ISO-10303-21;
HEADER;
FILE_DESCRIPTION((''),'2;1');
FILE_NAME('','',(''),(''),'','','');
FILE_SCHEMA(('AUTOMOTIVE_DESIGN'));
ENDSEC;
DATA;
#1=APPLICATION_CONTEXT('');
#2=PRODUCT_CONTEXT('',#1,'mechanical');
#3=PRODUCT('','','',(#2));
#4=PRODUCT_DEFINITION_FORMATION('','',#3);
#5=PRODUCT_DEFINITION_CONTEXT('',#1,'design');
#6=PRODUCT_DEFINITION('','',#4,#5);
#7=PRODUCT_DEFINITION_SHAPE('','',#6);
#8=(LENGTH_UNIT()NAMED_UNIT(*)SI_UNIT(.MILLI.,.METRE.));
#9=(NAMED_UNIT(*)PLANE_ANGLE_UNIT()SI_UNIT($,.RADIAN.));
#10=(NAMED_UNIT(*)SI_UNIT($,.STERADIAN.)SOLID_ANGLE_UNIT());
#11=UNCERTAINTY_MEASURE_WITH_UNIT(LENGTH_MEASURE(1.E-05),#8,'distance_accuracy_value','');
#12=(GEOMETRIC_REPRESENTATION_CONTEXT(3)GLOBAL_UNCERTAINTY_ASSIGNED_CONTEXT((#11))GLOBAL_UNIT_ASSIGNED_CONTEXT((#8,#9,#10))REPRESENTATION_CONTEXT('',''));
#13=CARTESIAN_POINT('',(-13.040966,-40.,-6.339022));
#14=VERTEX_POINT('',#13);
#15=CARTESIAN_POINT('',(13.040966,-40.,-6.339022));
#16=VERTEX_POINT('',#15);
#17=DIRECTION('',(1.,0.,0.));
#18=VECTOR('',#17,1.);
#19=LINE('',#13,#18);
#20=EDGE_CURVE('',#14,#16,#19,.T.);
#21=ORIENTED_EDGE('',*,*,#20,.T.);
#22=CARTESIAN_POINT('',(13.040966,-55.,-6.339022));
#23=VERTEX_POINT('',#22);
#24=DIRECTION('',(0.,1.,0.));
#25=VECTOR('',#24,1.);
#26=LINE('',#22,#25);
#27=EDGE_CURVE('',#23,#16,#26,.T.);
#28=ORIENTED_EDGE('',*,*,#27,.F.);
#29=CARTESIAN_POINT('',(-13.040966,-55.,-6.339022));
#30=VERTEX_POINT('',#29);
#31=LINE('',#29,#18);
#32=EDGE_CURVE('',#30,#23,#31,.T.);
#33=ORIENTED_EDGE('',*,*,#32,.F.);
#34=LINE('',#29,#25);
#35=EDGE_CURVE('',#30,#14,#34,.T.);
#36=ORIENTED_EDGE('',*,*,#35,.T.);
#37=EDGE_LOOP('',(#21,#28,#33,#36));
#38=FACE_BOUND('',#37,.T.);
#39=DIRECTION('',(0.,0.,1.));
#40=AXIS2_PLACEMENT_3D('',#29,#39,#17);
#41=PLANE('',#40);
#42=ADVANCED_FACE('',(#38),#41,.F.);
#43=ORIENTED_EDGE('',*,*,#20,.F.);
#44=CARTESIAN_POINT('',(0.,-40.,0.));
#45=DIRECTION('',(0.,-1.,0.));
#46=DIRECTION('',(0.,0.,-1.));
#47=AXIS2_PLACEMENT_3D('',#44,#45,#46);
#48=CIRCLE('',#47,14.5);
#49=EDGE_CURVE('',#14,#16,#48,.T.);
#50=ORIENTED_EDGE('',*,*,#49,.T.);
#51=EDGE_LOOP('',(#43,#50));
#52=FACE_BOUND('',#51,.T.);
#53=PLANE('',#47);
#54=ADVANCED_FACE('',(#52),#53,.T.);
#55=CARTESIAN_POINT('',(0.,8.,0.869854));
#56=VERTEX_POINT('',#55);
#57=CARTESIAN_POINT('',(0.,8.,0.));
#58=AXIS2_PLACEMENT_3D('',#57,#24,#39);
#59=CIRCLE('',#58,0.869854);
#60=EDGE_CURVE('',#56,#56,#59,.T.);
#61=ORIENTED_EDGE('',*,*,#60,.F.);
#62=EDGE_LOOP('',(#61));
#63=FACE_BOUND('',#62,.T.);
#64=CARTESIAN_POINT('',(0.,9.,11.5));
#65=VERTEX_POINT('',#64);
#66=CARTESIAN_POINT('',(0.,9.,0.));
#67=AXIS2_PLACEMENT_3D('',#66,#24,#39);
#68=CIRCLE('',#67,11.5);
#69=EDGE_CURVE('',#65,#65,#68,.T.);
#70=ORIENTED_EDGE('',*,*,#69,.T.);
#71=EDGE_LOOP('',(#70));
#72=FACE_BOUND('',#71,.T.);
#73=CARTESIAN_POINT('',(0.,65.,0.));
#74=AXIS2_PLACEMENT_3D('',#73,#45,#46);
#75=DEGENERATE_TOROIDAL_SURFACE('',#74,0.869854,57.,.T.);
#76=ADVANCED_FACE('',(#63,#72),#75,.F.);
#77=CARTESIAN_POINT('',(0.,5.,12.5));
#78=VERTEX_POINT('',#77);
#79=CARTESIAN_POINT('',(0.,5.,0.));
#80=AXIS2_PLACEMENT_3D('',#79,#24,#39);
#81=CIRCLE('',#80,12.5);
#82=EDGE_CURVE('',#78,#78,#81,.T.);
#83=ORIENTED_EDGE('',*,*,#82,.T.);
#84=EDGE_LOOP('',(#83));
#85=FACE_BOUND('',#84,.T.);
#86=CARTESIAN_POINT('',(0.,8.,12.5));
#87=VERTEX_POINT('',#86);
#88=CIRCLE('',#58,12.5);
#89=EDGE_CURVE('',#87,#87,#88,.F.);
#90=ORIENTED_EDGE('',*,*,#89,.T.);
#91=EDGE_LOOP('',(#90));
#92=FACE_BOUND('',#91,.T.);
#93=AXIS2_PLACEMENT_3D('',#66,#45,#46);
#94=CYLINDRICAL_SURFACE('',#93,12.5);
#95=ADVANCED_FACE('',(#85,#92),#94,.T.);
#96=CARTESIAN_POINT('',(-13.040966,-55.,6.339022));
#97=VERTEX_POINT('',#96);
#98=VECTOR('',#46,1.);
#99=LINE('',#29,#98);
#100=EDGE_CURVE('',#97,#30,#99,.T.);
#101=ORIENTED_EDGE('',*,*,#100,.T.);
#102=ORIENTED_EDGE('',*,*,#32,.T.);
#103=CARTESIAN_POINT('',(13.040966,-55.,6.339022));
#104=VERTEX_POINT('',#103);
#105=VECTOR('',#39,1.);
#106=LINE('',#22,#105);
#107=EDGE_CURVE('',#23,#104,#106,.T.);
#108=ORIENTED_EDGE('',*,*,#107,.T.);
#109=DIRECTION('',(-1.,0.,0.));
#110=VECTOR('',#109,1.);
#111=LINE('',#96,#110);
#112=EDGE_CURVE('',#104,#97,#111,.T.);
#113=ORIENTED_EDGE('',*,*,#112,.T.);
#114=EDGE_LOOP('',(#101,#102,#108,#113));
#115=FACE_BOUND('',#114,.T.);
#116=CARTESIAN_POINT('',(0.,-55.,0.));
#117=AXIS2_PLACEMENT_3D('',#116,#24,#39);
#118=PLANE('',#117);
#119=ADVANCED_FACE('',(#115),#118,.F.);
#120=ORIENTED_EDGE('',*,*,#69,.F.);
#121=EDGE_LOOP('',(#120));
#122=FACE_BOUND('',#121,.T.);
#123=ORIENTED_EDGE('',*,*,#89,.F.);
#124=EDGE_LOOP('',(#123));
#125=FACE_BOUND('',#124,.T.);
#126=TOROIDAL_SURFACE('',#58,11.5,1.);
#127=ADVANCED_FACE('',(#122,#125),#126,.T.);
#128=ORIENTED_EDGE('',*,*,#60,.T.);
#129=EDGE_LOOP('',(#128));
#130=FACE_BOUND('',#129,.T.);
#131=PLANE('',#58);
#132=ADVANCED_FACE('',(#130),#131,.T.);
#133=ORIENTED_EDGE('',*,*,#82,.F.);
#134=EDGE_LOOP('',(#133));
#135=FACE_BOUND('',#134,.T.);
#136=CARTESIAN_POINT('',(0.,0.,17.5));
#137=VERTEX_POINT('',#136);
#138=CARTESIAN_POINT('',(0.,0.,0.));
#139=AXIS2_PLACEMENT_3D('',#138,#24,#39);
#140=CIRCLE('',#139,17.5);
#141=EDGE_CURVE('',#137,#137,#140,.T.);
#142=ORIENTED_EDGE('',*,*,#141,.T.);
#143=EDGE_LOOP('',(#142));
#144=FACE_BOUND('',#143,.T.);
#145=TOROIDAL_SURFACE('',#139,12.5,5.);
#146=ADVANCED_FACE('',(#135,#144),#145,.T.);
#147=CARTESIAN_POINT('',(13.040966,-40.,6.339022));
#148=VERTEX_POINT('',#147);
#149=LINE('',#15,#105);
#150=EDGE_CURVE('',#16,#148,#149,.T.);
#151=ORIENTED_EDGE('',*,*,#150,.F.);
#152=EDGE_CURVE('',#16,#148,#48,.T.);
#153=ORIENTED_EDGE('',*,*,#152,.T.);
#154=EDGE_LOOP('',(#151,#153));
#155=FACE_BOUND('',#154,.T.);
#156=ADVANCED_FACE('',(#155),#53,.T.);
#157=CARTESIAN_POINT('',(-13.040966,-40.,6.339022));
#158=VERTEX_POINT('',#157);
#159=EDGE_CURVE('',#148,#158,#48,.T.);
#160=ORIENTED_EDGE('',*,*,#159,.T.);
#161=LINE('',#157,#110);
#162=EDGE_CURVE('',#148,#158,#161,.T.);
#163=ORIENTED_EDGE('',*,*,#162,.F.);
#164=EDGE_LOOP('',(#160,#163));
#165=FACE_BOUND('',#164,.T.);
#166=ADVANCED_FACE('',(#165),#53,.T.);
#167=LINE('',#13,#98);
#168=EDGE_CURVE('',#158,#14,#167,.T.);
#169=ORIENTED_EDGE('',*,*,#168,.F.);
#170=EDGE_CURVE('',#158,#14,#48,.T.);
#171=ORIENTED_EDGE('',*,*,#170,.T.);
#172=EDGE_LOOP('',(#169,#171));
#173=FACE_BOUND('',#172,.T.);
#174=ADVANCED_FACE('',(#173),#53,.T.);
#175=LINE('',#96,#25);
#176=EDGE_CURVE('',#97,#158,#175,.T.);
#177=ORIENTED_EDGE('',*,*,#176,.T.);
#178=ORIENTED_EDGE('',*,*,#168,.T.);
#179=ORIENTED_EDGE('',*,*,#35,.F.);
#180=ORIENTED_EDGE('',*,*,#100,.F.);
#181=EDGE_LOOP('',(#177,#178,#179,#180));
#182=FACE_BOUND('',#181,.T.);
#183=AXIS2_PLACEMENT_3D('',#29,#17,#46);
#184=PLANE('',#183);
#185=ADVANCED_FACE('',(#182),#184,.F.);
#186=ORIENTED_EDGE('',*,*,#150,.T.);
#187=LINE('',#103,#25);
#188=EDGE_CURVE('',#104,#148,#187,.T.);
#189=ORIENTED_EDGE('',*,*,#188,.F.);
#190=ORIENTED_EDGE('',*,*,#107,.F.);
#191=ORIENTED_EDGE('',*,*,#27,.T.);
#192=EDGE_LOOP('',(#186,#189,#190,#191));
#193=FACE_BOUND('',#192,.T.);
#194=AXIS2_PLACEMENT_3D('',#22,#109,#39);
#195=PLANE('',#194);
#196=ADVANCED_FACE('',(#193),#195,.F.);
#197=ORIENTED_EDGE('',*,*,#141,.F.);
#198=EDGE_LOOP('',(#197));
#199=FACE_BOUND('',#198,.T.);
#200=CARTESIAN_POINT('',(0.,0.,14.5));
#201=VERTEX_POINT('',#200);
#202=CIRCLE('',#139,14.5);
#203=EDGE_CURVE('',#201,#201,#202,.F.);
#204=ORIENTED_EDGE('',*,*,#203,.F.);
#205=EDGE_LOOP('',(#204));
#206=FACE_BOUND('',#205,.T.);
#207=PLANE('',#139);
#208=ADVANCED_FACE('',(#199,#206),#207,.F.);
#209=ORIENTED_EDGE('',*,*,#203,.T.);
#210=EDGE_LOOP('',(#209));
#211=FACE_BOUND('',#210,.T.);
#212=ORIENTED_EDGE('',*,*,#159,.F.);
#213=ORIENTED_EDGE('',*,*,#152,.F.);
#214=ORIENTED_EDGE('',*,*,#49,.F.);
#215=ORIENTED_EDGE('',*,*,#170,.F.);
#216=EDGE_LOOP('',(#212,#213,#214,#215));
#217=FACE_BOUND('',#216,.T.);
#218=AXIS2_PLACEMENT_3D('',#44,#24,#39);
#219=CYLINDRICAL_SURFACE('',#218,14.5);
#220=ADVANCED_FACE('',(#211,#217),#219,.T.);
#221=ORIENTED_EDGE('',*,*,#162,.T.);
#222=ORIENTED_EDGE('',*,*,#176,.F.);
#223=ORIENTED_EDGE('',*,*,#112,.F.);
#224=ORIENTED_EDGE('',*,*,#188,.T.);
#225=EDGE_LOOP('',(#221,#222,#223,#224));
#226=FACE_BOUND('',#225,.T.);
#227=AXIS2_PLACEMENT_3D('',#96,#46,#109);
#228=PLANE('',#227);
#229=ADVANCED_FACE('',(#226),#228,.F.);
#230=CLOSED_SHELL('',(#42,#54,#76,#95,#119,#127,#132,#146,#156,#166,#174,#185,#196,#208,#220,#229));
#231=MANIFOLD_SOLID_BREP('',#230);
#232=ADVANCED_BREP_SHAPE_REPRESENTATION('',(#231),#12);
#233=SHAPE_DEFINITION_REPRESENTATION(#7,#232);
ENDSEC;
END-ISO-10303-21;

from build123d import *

# Parameters (mm, degrees)
SKETCH1_R           = 17.5
BOSS_EXTRUDE1_DEPTH = 5
FILLET1_R           = 5
SKETCH2_R           = 12.5
BOSS_EXTRUDE2_DEPTH = 4
FILLET2_R           = 1
SKETCH3_R           = 11.5
CUT_EXTRUDE1_DEPTH  = 1
FILLET5_R           = 57
SKETCH5_R           = 14.5
BOSS_EXTRUDE3_DEPTH = 40
SKETCH6_W           = 26.081932022
SKETCH6_H           = 12.67804488
BOSS_EXTRUDE4_DEPTH = 15


# Some blends are built 0.0001 mm under size
with BuildPart() as part:
    # Sketch1 → Boss-Extrude1 (new body)
    with BuildSketch(Plane(origin=(0, 0, 0), x_dir=(1, 0, 0), z_dir=(0, 1, 0))):
        with Locations(Location((0, 0, 0), (0, 0, 270))):
            Circle(SKETCH1_R)
    extrude(amount=BOSS_EXTRUDE1_DEPTH)

    # Fillet1
    fillet1_edges = [part.edges().sort_by_distance(p)[0] for p in [
        (0, 5, -17.5),
    ]]
    fillet(fillet1_edges, radius=FILLET1_R - 0.0001)  # a hair under: the kernel refuses the full size

    # Sketch2 → Boss-Extrude2 (add)
    with BuildSketch(Plane(origin=(0, 5, 0), x_dir=(1, 0, 0), z_dir=(0, 1, 0))):
        with Locations(Location((0, 0, 0), (0, 0, 270))):
            Circle(SKETCH2_R)
    extrude(amount=BOSS_EXTRUDE2_DEPTH)

    # Fillet2
    fillet2_edges = [part.edges().sort_by_distance(p)[0] for p in [
        (0, 9, -12.5),
    ]]
    fillet(fillet2_edges, radius=FILLET2_R)

    # Sketch3 → Cut-Extrude1 (cut)
    with BuildSketch(Plane(origin=(0, 9, 0), x_dir=(1, 0, 0), z_dir=(0, 1, 0))):
        with Locations(Location((0, 0, 0), (0, 0, 270))):
            Circle(SKETCH3_R)
    extrude(amount=-CUT_EXTRUDE1_DEPTH, mode=Mode.SUBTRACT)

    # Fillet5
    # the kernel refuses this fillet: 57 mm, written as the material it adds along each edge
    with BuildSketch(Plane(origin=(0, 8, 0), x_dir=(0, 0, 1), z_dir=(-1, 0, 0))) as fillet5_piece_1:
        with BuildLine():
            CenterArc((0.869854187, 57), FILLET5_R, 270, 10.748235858)
            Line((0.869854187, 0), (11.5, 0))
            Line((11.5, 0), (11.5, 1))
        make_face()
    revolve(axis=Axis((0, 8, 0), (0, 1, 0)))

    # Sketch5 → Boss-Extrude3 (add)
    with BuildSketch(Plane.XZ):
        with Locations(Location((0, 0, 0), (0, 0, 90))):
            Circle(SKETCH5_R)
    extrude(amount=BOSS_EXTRUDE3_DEPTH)

    # Sketch6 → Boss-Extrude4 (add)
    with BuildSketch(Plane.XZ.offset(40)):
        Rectangle(SKETCH6_W, SKETCH6_H)
    extrude(amount=BOSS_EXTRUDE4_DEPTH)


solid = part.part
